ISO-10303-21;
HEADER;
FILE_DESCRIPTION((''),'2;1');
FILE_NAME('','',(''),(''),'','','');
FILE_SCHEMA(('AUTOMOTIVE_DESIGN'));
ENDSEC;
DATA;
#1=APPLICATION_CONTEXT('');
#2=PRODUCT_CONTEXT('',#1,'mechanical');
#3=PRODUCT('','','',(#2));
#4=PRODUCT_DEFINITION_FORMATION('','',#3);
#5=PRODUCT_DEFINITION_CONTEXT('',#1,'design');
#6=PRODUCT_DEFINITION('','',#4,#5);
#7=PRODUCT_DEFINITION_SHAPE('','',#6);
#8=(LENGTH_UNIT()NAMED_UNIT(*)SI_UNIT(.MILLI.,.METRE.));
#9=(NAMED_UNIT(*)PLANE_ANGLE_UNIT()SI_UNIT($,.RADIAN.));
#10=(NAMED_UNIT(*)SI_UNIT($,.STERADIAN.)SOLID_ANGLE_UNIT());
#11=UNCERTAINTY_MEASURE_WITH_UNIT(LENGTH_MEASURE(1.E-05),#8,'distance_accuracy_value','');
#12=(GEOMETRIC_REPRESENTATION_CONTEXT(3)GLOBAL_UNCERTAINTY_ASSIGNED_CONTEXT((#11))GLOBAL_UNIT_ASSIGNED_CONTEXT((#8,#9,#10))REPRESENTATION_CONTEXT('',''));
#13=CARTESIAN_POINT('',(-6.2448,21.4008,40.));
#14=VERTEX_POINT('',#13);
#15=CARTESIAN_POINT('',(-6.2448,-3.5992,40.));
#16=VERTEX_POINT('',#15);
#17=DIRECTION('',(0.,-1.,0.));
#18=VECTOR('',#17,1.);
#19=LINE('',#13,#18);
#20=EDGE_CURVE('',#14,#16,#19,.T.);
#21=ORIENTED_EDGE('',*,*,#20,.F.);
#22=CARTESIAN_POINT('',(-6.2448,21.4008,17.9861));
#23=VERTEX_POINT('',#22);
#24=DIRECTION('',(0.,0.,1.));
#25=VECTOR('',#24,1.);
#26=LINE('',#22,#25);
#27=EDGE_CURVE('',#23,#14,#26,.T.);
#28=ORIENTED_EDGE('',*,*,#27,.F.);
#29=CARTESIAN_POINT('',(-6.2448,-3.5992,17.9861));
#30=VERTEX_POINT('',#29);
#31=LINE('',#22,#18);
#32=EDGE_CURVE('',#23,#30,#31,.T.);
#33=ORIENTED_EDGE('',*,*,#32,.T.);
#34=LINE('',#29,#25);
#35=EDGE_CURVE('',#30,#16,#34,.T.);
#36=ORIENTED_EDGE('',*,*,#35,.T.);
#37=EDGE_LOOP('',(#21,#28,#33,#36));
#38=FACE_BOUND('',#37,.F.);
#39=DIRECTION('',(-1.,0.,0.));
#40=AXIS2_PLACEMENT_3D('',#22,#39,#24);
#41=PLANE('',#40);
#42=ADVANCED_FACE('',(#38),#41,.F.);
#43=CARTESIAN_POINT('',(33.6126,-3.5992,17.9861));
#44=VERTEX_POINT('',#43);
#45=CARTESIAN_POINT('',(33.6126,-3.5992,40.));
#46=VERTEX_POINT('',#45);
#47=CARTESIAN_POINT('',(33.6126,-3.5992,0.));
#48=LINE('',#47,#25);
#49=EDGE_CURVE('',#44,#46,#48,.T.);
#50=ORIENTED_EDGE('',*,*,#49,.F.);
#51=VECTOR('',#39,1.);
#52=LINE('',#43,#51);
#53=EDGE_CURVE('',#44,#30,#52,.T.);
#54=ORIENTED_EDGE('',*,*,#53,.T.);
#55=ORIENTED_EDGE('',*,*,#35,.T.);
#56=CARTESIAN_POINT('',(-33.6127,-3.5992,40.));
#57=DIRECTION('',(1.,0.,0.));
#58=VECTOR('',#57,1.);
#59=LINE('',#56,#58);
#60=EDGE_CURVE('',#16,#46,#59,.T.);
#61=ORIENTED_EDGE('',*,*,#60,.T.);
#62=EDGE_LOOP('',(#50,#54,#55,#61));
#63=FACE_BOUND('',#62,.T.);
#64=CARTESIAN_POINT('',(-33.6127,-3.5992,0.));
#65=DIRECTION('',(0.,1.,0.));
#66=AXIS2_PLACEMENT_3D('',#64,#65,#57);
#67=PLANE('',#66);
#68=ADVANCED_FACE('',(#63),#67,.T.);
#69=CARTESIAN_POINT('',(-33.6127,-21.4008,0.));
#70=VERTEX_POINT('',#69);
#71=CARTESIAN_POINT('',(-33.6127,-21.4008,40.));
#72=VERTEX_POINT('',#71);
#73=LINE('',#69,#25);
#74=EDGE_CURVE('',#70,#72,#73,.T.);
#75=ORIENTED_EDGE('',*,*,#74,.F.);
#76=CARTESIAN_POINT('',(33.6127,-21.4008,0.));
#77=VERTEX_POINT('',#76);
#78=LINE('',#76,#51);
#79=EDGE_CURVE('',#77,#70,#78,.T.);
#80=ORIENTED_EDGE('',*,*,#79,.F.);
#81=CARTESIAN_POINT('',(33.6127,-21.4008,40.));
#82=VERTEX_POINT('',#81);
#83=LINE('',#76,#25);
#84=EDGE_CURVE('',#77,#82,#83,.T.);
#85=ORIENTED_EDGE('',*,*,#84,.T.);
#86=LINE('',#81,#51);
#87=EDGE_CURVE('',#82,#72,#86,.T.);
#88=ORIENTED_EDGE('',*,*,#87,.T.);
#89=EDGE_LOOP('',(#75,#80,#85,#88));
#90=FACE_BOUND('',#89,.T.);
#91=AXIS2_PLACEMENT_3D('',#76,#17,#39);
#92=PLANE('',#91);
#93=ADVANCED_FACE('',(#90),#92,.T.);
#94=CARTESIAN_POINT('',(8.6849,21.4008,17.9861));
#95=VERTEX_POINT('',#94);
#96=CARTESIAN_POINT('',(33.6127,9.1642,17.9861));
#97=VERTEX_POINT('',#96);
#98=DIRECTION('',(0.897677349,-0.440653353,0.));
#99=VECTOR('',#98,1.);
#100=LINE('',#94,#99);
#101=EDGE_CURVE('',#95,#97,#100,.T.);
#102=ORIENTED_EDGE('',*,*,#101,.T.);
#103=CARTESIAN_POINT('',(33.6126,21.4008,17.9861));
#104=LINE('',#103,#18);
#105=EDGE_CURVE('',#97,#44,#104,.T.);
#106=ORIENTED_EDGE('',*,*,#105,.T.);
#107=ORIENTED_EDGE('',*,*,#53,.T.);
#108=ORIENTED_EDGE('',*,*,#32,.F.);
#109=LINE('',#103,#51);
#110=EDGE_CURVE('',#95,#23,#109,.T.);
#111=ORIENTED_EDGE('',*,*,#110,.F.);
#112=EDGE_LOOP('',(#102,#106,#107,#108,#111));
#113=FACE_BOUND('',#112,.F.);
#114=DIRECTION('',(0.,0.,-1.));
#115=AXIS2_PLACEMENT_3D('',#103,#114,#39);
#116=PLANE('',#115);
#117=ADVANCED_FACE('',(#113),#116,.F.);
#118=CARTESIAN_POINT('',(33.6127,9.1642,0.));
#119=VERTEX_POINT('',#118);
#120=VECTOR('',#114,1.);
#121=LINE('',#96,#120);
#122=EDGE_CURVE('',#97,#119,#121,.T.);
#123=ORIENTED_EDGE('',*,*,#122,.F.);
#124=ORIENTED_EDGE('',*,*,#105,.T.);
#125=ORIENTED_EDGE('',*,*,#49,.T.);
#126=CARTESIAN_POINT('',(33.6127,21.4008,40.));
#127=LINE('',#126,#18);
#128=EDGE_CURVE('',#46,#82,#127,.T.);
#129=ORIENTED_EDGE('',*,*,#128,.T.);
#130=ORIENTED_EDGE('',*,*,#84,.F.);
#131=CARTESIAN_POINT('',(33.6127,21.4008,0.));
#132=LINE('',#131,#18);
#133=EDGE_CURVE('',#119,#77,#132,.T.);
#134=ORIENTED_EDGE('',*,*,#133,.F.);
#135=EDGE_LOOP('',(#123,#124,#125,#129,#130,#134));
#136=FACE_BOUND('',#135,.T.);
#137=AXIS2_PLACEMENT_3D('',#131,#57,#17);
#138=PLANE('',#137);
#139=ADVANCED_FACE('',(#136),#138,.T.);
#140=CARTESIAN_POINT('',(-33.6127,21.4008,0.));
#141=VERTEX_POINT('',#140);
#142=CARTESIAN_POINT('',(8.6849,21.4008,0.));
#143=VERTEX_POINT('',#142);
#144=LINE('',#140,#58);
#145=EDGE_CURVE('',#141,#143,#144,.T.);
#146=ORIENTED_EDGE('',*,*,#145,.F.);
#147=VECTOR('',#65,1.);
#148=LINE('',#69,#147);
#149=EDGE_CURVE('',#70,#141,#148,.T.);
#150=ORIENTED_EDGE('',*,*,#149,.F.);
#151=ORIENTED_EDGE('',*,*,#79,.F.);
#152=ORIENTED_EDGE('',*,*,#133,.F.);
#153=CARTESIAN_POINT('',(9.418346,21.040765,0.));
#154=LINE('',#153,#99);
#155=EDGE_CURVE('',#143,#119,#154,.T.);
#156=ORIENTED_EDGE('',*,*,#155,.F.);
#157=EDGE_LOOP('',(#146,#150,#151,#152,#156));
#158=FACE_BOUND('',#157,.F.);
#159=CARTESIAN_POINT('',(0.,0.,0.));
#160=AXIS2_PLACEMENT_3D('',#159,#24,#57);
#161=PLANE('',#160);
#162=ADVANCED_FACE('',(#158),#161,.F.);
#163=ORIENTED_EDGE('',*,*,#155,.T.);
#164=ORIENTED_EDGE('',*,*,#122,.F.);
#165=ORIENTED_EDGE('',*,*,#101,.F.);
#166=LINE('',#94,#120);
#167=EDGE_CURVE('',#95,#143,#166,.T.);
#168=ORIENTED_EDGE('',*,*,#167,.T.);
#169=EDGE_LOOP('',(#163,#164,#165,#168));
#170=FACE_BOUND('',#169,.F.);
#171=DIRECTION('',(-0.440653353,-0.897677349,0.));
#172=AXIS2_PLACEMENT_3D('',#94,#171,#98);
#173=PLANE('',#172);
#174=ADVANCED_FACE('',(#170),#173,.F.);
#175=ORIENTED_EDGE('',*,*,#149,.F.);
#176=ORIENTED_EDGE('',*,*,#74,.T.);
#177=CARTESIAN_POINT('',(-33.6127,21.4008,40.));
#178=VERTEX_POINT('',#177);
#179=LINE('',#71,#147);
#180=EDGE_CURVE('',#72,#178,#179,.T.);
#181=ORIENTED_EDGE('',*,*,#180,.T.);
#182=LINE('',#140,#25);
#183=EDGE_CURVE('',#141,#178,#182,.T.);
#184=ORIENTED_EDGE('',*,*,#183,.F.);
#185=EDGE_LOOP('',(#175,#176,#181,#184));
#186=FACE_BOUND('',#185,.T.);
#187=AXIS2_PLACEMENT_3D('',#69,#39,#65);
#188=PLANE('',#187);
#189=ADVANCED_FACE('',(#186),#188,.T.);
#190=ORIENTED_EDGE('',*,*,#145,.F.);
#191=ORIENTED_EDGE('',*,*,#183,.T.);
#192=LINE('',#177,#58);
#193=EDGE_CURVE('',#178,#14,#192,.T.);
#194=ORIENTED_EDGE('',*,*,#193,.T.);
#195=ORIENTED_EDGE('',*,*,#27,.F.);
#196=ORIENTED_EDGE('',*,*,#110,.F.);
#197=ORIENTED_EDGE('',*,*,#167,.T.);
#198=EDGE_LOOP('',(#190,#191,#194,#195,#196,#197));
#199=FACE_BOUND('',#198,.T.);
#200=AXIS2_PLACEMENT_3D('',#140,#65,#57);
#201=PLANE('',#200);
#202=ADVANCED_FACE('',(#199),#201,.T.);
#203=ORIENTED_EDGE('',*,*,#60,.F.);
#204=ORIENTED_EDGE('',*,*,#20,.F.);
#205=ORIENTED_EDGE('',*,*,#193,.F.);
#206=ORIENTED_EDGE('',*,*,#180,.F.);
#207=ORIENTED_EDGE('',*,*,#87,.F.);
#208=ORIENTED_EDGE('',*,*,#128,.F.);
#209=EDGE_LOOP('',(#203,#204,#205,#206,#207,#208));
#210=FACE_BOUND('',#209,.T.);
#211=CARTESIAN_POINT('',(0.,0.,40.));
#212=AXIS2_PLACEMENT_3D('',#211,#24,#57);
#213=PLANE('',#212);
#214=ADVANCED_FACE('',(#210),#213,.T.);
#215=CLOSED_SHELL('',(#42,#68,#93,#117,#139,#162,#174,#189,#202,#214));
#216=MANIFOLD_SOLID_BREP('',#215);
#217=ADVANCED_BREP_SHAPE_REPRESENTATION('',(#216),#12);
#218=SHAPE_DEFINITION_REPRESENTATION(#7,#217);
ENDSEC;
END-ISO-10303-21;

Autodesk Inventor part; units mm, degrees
ref_plane "YZ Plane" through (0, 0, 0) normal (1, 0, 0) x (0, 1, 0)
ref_plane "XZ Plane" through (0, 0, 0) normal (0, 1, 0) x (-1, 0, 0)
ref_plane "XY Plane" through (0, 0, 0) normal (0, 0, 1) x (1, 0, 0)
sketch "스케치1" plane through (0, 0, 0) normal (0, 0, 1) x (1, 0, 0)
  line L0 (33.6127, -21.4008) -> (-33.6127, -21.4008)
  line L1 (-33.6127, -21.4008) -> (-33.6127, 21.4008)
  line L2 (-33.6127, 21.4008) -> (33.6127, 21.4008)
  line L3 (33.6127, 21.4008) -> (33.6127, -21.4008)
  line L4 (33.6127, -21.4008) -> (-33.6127, 21.4008) construction
  line L5 (-33.6127, -21.4008) -> (33.6127, 21.4008) construction
  point P0 (0, 0)
extrude "돌출1" add sketch "스케치1" along normal blind 40
sketch "스케치2" plane through (-33.6127, 21.4008, 0) normal (0, 1, 0) x (1, 0, 0)
  line L0 (67.2253, 0) -> (67.2253, -40) projected
  line L1 (0, -40) -> (67.2253, -40) projected
  line L2 (67.2253, -17.9861) -> (27.3679, -17.9861)
  line L3 (27.3679, -17.9861) -> (27.3679, -40)
  line L4 (27.3679, -40) -> (67.2253, -40)
  line L5 (67.2253, -40) -> (67.2253, -17.9861)
  point P0 (33.6127, 0)
extrude "돌출2" cut sketch "스케치2" against normal blind 25
sketch "스케치3" plane through (-6.2447, 21.4008, 17.9861) normal (0, 0, 1) x (1, 0, 0)
  point P0 (6.2447, -21.4008)
sketch "스케치4" plane through (-6.2447, 21.4008, 17.9861) normal (0, 0, 1) x (1, 0, 0)
  point P0 (6.2447, -21.4008)
sketch "스케치5" plane through (-6.2447, 21.4008, 17.9861) normal (0, 0, 1) x (1, 0, 0)
  point P0 (6.2447, -21.4008)
sketch "스케치6" plane through (-33.6127, 21.4008, 0) normal (0, 1, 0) x (1, 0, 0)
  line L0 (27.3679, -17.9861) -> (67.2253, -17.9861) projected
  line L1 (0, 0) -> (67.2253, 0) projected
  line L2 (67.2253, -17.9861) -> (39.8016, -17.9861)
  line L3 (39.8016, -17.9861) -> (39.8016, 0)
  line L4 (39.8016, 0) -> (67.2253, 0)
  line L5 (67.2253, 0) -> (67.2253, -17.9861)
  point P0 (33.6127, 0)
sketch "스케치7" plane through (-6.2447, 21.4008, 17.9861) normal (0, 0, 1) x (1, 0, 0)
  line L0 (-27.3679, 0) -> (39.8574, 0) projected
  line L1 (14.9296, 0) -> (39.8574, -12.2366)
  line L2 (39.8574, 0) -> (39.8574, -42.8017) projected
  point P0 (6.2447, -21.4008)
extrude "돌출3" cut sketch "스케치7" against normal blind 20
sketch "스케치8" plane through (0, 0, 40) normal (0, 0, 1) x (1, 0, 0)
  point P0 (0, 0)
properties part number "240503_3Dsketch04"
